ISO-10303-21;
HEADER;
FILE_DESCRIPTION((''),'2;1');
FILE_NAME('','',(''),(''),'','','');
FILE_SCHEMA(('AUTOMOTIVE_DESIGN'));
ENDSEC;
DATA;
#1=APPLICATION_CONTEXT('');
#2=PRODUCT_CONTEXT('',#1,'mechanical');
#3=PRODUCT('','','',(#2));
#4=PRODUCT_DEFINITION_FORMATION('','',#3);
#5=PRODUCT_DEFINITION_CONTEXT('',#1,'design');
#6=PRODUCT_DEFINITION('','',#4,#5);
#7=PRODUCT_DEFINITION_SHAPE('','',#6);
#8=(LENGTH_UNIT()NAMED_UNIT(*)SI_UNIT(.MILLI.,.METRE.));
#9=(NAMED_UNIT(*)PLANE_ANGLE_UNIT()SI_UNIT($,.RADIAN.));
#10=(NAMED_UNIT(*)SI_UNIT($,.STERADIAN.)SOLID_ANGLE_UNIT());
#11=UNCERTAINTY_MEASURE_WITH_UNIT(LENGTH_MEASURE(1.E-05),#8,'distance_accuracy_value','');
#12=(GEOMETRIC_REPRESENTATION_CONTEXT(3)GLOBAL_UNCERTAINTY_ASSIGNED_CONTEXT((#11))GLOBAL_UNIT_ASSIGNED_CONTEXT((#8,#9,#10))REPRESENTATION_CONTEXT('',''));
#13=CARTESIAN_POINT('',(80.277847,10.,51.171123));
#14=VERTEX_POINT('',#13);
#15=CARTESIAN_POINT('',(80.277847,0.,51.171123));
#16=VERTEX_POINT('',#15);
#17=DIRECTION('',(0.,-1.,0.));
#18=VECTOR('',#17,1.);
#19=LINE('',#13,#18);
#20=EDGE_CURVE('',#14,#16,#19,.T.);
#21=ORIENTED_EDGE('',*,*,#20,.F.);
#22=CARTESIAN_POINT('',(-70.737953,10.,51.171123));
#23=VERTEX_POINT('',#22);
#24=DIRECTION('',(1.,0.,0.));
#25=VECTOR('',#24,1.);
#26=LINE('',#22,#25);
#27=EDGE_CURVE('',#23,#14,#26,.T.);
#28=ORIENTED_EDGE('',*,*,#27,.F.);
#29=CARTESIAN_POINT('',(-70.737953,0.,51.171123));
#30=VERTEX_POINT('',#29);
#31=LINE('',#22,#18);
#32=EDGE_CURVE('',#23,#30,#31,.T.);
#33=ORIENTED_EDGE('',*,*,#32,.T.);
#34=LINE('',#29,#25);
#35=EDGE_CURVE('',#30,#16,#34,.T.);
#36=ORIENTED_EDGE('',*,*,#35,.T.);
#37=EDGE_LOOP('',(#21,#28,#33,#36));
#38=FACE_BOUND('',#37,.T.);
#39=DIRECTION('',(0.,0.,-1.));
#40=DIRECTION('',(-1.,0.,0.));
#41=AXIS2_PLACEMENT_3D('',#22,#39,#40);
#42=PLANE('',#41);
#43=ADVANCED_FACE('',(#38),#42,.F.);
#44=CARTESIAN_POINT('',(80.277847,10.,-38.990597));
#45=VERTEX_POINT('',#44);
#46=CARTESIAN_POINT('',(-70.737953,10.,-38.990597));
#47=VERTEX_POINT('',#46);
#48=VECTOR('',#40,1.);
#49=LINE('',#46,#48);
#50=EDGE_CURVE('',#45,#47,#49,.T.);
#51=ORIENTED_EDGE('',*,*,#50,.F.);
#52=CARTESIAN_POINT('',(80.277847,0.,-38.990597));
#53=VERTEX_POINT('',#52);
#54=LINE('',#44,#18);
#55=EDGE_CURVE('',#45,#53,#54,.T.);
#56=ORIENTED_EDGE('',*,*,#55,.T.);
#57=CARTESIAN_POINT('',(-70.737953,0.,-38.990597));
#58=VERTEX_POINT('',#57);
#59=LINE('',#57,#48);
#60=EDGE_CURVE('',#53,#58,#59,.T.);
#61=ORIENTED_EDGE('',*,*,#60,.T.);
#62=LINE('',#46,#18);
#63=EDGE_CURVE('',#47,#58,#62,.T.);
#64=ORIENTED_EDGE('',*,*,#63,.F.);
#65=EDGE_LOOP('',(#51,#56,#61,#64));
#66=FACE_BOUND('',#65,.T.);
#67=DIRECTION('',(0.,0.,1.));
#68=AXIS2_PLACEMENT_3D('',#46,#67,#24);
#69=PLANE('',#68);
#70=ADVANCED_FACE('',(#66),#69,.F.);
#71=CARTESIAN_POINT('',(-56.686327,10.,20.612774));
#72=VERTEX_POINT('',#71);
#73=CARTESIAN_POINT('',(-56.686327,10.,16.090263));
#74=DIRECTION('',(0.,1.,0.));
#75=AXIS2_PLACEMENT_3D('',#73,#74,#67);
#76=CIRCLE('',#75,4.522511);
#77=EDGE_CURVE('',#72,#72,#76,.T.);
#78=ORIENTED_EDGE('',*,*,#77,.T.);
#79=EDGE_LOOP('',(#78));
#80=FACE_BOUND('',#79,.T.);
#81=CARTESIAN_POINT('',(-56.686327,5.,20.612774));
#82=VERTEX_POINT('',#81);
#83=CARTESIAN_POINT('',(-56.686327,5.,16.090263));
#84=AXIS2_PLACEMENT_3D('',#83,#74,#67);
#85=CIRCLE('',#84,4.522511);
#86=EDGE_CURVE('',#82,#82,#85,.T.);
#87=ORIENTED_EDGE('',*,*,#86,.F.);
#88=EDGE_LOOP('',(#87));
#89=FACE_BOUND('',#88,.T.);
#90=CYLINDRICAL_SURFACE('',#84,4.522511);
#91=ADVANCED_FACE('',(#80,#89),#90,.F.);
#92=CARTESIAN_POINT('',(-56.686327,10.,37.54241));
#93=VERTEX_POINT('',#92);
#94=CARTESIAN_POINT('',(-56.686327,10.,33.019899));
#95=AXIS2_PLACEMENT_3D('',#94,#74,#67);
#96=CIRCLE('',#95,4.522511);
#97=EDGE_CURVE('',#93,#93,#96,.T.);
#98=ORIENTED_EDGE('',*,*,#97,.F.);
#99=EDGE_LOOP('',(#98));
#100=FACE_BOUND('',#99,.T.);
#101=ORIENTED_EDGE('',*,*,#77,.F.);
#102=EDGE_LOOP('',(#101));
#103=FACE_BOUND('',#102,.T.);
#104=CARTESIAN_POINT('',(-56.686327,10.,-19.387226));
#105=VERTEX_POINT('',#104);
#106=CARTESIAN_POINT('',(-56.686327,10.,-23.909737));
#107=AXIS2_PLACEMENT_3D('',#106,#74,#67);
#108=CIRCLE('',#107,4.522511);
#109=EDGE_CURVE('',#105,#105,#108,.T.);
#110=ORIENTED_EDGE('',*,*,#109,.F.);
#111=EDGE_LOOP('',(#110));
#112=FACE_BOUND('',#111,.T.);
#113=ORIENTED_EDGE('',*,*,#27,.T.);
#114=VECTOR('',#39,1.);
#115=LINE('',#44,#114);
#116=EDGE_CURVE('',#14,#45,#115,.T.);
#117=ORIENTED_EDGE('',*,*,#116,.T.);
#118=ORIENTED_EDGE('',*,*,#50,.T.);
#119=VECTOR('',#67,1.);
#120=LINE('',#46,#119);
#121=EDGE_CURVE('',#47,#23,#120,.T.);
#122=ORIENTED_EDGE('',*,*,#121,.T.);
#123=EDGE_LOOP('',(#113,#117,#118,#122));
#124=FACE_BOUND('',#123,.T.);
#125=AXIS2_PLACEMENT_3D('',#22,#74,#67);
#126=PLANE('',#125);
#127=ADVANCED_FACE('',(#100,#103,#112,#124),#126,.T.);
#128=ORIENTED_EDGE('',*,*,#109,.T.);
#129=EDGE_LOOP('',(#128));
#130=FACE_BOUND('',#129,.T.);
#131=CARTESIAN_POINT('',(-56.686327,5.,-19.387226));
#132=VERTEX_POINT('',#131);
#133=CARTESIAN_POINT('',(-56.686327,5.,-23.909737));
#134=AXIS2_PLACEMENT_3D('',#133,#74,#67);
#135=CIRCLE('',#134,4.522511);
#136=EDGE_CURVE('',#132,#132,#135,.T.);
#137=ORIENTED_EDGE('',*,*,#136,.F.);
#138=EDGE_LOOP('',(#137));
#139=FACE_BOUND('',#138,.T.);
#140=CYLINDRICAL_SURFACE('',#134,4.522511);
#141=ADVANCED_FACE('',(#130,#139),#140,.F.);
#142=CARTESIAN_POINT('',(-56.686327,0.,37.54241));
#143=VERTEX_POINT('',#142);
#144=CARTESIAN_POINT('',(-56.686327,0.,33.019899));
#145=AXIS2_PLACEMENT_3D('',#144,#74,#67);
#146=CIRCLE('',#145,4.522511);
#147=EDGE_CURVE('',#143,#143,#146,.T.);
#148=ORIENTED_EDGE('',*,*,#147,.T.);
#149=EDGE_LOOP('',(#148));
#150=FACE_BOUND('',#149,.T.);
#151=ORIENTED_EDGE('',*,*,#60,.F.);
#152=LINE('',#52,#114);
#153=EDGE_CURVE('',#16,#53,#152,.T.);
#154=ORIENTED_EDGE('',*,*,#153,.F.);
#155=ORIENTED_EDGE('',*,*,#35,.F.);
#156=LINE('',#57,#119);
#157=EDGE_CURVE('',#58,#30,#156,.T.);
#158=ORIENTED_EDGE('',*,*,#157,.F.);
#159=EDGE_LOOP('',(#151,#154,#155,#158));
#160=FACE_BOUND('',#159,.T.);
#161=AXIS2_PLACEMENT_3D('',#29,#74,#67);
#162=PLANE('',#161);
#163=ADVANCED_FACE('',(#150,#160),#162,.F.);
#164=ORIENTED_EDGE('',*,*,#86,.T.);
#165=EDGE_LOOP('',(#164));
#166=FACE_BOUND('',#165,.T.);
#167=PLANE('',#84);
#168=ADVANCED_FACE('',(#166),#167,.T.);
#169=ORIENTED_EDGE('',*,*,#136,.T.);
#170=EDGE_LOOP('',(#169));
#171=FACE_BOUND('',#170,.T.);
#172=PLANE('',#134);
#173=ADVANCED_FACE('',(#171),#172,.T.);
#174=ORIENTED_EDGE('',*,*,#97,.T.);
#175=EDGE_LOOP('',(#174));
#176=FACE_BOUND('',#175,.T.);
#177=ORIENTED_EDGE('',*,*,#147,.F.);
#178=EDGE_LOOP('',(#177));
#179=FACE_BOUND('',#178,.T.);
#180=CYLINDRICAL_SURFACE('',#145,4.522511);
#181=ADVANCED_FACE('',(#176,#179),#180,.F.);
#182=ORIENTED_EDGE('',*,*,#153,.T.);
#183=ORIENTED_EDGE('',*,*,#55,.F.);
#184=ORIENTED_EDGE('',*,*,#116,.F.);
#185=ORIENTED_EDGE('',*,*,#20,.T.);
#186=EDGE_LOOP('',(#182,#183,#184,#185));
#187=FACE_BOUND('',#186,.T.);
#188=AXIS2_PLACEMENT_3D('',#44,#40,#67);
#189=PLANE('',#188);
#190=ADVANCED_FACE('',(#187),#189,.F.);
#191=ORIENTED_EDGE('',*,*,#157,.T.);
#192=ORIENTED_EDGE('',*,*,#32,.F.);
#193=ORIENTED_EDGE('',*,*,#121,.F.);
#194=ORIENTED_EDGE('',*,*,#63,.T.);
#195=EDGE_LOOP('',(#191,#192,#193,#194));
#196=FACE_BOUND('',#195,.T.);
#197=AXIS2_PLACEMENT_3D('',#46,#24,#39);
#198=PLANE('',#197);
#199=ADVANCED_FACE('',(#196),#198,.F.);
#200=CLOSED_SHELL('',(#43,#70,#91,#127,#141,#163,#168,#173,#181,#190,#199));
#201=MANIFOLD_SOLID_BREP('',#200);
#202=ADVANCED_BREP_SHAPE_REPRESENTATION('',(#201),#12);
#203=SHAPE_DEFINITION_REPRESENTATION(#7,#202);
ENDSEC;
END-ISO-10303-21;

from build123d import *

# Parameters (mm, degrees)
SKETCH1_W           = 151.015799324
SKETCH1_H           = 90.161719468
BOSS_EXTRUDE1_DEPTH = 10
SKETCH2_R           = 4.522511264
CUT_EXTRUDE1_DEPTH  = 10
TPATTERN1_START     = 5
TPATTERN1_OUTLINE_R = 4.522511264
TPATTERN1_DEPTH     = 5


# Read off the part's stored shape, not the designer's step: TPattern1
with BuildPart() as part:
    # Sketch1 → Boss-Extrude1 (new body)
    with BuildSketch(Plane(origin=(0, 0, 0), x_dir=(1, 0, 0), z_dir=(0, 1, 0))):
        with Locations((4.769946885, -6.090262952)):
            Rectangle(SKETCH1_W, SKETCH1_H)
    extrude(amount=BOSS_EXTRUDE1_DEPTH)

    # Sketch2 → Cut-Extrude1 (cut)
    with BuildSketch(Plane(origin=(0, 10, 0), x_dir=(-1, 0, 0), z_dir=(0, 1, 0))):
        with Locations(Location((56.686327356, 33.019898718, 0), (0, 0, 90))):
            Circle(SKETCH2_R)
    extrude(amount=-CUT_EXTRUDE1_DEPTH, mode=Mode.SUBTRACT)

    # TPattern1 outline → TPattern1 (cut)
    with BuildSketch(Plane(origin=(0, 0, 0), x_dir=(1, 0, 0), z_dir=(0, 1, 0)).offset(TPATTERN1_START)):
        with Locations((-56.686327356, -16.090262952)):
            Circle(TPATTERN1_OUTLINE_R)
        with Locations((-56.686327356, 23.909737048)):
            Circle(TPATTERN1_OUTLINE_R)
    extrude(amount=TPATTERN1_DEPTH, mode=Mode.SUBTRACT)


solid = part.part
